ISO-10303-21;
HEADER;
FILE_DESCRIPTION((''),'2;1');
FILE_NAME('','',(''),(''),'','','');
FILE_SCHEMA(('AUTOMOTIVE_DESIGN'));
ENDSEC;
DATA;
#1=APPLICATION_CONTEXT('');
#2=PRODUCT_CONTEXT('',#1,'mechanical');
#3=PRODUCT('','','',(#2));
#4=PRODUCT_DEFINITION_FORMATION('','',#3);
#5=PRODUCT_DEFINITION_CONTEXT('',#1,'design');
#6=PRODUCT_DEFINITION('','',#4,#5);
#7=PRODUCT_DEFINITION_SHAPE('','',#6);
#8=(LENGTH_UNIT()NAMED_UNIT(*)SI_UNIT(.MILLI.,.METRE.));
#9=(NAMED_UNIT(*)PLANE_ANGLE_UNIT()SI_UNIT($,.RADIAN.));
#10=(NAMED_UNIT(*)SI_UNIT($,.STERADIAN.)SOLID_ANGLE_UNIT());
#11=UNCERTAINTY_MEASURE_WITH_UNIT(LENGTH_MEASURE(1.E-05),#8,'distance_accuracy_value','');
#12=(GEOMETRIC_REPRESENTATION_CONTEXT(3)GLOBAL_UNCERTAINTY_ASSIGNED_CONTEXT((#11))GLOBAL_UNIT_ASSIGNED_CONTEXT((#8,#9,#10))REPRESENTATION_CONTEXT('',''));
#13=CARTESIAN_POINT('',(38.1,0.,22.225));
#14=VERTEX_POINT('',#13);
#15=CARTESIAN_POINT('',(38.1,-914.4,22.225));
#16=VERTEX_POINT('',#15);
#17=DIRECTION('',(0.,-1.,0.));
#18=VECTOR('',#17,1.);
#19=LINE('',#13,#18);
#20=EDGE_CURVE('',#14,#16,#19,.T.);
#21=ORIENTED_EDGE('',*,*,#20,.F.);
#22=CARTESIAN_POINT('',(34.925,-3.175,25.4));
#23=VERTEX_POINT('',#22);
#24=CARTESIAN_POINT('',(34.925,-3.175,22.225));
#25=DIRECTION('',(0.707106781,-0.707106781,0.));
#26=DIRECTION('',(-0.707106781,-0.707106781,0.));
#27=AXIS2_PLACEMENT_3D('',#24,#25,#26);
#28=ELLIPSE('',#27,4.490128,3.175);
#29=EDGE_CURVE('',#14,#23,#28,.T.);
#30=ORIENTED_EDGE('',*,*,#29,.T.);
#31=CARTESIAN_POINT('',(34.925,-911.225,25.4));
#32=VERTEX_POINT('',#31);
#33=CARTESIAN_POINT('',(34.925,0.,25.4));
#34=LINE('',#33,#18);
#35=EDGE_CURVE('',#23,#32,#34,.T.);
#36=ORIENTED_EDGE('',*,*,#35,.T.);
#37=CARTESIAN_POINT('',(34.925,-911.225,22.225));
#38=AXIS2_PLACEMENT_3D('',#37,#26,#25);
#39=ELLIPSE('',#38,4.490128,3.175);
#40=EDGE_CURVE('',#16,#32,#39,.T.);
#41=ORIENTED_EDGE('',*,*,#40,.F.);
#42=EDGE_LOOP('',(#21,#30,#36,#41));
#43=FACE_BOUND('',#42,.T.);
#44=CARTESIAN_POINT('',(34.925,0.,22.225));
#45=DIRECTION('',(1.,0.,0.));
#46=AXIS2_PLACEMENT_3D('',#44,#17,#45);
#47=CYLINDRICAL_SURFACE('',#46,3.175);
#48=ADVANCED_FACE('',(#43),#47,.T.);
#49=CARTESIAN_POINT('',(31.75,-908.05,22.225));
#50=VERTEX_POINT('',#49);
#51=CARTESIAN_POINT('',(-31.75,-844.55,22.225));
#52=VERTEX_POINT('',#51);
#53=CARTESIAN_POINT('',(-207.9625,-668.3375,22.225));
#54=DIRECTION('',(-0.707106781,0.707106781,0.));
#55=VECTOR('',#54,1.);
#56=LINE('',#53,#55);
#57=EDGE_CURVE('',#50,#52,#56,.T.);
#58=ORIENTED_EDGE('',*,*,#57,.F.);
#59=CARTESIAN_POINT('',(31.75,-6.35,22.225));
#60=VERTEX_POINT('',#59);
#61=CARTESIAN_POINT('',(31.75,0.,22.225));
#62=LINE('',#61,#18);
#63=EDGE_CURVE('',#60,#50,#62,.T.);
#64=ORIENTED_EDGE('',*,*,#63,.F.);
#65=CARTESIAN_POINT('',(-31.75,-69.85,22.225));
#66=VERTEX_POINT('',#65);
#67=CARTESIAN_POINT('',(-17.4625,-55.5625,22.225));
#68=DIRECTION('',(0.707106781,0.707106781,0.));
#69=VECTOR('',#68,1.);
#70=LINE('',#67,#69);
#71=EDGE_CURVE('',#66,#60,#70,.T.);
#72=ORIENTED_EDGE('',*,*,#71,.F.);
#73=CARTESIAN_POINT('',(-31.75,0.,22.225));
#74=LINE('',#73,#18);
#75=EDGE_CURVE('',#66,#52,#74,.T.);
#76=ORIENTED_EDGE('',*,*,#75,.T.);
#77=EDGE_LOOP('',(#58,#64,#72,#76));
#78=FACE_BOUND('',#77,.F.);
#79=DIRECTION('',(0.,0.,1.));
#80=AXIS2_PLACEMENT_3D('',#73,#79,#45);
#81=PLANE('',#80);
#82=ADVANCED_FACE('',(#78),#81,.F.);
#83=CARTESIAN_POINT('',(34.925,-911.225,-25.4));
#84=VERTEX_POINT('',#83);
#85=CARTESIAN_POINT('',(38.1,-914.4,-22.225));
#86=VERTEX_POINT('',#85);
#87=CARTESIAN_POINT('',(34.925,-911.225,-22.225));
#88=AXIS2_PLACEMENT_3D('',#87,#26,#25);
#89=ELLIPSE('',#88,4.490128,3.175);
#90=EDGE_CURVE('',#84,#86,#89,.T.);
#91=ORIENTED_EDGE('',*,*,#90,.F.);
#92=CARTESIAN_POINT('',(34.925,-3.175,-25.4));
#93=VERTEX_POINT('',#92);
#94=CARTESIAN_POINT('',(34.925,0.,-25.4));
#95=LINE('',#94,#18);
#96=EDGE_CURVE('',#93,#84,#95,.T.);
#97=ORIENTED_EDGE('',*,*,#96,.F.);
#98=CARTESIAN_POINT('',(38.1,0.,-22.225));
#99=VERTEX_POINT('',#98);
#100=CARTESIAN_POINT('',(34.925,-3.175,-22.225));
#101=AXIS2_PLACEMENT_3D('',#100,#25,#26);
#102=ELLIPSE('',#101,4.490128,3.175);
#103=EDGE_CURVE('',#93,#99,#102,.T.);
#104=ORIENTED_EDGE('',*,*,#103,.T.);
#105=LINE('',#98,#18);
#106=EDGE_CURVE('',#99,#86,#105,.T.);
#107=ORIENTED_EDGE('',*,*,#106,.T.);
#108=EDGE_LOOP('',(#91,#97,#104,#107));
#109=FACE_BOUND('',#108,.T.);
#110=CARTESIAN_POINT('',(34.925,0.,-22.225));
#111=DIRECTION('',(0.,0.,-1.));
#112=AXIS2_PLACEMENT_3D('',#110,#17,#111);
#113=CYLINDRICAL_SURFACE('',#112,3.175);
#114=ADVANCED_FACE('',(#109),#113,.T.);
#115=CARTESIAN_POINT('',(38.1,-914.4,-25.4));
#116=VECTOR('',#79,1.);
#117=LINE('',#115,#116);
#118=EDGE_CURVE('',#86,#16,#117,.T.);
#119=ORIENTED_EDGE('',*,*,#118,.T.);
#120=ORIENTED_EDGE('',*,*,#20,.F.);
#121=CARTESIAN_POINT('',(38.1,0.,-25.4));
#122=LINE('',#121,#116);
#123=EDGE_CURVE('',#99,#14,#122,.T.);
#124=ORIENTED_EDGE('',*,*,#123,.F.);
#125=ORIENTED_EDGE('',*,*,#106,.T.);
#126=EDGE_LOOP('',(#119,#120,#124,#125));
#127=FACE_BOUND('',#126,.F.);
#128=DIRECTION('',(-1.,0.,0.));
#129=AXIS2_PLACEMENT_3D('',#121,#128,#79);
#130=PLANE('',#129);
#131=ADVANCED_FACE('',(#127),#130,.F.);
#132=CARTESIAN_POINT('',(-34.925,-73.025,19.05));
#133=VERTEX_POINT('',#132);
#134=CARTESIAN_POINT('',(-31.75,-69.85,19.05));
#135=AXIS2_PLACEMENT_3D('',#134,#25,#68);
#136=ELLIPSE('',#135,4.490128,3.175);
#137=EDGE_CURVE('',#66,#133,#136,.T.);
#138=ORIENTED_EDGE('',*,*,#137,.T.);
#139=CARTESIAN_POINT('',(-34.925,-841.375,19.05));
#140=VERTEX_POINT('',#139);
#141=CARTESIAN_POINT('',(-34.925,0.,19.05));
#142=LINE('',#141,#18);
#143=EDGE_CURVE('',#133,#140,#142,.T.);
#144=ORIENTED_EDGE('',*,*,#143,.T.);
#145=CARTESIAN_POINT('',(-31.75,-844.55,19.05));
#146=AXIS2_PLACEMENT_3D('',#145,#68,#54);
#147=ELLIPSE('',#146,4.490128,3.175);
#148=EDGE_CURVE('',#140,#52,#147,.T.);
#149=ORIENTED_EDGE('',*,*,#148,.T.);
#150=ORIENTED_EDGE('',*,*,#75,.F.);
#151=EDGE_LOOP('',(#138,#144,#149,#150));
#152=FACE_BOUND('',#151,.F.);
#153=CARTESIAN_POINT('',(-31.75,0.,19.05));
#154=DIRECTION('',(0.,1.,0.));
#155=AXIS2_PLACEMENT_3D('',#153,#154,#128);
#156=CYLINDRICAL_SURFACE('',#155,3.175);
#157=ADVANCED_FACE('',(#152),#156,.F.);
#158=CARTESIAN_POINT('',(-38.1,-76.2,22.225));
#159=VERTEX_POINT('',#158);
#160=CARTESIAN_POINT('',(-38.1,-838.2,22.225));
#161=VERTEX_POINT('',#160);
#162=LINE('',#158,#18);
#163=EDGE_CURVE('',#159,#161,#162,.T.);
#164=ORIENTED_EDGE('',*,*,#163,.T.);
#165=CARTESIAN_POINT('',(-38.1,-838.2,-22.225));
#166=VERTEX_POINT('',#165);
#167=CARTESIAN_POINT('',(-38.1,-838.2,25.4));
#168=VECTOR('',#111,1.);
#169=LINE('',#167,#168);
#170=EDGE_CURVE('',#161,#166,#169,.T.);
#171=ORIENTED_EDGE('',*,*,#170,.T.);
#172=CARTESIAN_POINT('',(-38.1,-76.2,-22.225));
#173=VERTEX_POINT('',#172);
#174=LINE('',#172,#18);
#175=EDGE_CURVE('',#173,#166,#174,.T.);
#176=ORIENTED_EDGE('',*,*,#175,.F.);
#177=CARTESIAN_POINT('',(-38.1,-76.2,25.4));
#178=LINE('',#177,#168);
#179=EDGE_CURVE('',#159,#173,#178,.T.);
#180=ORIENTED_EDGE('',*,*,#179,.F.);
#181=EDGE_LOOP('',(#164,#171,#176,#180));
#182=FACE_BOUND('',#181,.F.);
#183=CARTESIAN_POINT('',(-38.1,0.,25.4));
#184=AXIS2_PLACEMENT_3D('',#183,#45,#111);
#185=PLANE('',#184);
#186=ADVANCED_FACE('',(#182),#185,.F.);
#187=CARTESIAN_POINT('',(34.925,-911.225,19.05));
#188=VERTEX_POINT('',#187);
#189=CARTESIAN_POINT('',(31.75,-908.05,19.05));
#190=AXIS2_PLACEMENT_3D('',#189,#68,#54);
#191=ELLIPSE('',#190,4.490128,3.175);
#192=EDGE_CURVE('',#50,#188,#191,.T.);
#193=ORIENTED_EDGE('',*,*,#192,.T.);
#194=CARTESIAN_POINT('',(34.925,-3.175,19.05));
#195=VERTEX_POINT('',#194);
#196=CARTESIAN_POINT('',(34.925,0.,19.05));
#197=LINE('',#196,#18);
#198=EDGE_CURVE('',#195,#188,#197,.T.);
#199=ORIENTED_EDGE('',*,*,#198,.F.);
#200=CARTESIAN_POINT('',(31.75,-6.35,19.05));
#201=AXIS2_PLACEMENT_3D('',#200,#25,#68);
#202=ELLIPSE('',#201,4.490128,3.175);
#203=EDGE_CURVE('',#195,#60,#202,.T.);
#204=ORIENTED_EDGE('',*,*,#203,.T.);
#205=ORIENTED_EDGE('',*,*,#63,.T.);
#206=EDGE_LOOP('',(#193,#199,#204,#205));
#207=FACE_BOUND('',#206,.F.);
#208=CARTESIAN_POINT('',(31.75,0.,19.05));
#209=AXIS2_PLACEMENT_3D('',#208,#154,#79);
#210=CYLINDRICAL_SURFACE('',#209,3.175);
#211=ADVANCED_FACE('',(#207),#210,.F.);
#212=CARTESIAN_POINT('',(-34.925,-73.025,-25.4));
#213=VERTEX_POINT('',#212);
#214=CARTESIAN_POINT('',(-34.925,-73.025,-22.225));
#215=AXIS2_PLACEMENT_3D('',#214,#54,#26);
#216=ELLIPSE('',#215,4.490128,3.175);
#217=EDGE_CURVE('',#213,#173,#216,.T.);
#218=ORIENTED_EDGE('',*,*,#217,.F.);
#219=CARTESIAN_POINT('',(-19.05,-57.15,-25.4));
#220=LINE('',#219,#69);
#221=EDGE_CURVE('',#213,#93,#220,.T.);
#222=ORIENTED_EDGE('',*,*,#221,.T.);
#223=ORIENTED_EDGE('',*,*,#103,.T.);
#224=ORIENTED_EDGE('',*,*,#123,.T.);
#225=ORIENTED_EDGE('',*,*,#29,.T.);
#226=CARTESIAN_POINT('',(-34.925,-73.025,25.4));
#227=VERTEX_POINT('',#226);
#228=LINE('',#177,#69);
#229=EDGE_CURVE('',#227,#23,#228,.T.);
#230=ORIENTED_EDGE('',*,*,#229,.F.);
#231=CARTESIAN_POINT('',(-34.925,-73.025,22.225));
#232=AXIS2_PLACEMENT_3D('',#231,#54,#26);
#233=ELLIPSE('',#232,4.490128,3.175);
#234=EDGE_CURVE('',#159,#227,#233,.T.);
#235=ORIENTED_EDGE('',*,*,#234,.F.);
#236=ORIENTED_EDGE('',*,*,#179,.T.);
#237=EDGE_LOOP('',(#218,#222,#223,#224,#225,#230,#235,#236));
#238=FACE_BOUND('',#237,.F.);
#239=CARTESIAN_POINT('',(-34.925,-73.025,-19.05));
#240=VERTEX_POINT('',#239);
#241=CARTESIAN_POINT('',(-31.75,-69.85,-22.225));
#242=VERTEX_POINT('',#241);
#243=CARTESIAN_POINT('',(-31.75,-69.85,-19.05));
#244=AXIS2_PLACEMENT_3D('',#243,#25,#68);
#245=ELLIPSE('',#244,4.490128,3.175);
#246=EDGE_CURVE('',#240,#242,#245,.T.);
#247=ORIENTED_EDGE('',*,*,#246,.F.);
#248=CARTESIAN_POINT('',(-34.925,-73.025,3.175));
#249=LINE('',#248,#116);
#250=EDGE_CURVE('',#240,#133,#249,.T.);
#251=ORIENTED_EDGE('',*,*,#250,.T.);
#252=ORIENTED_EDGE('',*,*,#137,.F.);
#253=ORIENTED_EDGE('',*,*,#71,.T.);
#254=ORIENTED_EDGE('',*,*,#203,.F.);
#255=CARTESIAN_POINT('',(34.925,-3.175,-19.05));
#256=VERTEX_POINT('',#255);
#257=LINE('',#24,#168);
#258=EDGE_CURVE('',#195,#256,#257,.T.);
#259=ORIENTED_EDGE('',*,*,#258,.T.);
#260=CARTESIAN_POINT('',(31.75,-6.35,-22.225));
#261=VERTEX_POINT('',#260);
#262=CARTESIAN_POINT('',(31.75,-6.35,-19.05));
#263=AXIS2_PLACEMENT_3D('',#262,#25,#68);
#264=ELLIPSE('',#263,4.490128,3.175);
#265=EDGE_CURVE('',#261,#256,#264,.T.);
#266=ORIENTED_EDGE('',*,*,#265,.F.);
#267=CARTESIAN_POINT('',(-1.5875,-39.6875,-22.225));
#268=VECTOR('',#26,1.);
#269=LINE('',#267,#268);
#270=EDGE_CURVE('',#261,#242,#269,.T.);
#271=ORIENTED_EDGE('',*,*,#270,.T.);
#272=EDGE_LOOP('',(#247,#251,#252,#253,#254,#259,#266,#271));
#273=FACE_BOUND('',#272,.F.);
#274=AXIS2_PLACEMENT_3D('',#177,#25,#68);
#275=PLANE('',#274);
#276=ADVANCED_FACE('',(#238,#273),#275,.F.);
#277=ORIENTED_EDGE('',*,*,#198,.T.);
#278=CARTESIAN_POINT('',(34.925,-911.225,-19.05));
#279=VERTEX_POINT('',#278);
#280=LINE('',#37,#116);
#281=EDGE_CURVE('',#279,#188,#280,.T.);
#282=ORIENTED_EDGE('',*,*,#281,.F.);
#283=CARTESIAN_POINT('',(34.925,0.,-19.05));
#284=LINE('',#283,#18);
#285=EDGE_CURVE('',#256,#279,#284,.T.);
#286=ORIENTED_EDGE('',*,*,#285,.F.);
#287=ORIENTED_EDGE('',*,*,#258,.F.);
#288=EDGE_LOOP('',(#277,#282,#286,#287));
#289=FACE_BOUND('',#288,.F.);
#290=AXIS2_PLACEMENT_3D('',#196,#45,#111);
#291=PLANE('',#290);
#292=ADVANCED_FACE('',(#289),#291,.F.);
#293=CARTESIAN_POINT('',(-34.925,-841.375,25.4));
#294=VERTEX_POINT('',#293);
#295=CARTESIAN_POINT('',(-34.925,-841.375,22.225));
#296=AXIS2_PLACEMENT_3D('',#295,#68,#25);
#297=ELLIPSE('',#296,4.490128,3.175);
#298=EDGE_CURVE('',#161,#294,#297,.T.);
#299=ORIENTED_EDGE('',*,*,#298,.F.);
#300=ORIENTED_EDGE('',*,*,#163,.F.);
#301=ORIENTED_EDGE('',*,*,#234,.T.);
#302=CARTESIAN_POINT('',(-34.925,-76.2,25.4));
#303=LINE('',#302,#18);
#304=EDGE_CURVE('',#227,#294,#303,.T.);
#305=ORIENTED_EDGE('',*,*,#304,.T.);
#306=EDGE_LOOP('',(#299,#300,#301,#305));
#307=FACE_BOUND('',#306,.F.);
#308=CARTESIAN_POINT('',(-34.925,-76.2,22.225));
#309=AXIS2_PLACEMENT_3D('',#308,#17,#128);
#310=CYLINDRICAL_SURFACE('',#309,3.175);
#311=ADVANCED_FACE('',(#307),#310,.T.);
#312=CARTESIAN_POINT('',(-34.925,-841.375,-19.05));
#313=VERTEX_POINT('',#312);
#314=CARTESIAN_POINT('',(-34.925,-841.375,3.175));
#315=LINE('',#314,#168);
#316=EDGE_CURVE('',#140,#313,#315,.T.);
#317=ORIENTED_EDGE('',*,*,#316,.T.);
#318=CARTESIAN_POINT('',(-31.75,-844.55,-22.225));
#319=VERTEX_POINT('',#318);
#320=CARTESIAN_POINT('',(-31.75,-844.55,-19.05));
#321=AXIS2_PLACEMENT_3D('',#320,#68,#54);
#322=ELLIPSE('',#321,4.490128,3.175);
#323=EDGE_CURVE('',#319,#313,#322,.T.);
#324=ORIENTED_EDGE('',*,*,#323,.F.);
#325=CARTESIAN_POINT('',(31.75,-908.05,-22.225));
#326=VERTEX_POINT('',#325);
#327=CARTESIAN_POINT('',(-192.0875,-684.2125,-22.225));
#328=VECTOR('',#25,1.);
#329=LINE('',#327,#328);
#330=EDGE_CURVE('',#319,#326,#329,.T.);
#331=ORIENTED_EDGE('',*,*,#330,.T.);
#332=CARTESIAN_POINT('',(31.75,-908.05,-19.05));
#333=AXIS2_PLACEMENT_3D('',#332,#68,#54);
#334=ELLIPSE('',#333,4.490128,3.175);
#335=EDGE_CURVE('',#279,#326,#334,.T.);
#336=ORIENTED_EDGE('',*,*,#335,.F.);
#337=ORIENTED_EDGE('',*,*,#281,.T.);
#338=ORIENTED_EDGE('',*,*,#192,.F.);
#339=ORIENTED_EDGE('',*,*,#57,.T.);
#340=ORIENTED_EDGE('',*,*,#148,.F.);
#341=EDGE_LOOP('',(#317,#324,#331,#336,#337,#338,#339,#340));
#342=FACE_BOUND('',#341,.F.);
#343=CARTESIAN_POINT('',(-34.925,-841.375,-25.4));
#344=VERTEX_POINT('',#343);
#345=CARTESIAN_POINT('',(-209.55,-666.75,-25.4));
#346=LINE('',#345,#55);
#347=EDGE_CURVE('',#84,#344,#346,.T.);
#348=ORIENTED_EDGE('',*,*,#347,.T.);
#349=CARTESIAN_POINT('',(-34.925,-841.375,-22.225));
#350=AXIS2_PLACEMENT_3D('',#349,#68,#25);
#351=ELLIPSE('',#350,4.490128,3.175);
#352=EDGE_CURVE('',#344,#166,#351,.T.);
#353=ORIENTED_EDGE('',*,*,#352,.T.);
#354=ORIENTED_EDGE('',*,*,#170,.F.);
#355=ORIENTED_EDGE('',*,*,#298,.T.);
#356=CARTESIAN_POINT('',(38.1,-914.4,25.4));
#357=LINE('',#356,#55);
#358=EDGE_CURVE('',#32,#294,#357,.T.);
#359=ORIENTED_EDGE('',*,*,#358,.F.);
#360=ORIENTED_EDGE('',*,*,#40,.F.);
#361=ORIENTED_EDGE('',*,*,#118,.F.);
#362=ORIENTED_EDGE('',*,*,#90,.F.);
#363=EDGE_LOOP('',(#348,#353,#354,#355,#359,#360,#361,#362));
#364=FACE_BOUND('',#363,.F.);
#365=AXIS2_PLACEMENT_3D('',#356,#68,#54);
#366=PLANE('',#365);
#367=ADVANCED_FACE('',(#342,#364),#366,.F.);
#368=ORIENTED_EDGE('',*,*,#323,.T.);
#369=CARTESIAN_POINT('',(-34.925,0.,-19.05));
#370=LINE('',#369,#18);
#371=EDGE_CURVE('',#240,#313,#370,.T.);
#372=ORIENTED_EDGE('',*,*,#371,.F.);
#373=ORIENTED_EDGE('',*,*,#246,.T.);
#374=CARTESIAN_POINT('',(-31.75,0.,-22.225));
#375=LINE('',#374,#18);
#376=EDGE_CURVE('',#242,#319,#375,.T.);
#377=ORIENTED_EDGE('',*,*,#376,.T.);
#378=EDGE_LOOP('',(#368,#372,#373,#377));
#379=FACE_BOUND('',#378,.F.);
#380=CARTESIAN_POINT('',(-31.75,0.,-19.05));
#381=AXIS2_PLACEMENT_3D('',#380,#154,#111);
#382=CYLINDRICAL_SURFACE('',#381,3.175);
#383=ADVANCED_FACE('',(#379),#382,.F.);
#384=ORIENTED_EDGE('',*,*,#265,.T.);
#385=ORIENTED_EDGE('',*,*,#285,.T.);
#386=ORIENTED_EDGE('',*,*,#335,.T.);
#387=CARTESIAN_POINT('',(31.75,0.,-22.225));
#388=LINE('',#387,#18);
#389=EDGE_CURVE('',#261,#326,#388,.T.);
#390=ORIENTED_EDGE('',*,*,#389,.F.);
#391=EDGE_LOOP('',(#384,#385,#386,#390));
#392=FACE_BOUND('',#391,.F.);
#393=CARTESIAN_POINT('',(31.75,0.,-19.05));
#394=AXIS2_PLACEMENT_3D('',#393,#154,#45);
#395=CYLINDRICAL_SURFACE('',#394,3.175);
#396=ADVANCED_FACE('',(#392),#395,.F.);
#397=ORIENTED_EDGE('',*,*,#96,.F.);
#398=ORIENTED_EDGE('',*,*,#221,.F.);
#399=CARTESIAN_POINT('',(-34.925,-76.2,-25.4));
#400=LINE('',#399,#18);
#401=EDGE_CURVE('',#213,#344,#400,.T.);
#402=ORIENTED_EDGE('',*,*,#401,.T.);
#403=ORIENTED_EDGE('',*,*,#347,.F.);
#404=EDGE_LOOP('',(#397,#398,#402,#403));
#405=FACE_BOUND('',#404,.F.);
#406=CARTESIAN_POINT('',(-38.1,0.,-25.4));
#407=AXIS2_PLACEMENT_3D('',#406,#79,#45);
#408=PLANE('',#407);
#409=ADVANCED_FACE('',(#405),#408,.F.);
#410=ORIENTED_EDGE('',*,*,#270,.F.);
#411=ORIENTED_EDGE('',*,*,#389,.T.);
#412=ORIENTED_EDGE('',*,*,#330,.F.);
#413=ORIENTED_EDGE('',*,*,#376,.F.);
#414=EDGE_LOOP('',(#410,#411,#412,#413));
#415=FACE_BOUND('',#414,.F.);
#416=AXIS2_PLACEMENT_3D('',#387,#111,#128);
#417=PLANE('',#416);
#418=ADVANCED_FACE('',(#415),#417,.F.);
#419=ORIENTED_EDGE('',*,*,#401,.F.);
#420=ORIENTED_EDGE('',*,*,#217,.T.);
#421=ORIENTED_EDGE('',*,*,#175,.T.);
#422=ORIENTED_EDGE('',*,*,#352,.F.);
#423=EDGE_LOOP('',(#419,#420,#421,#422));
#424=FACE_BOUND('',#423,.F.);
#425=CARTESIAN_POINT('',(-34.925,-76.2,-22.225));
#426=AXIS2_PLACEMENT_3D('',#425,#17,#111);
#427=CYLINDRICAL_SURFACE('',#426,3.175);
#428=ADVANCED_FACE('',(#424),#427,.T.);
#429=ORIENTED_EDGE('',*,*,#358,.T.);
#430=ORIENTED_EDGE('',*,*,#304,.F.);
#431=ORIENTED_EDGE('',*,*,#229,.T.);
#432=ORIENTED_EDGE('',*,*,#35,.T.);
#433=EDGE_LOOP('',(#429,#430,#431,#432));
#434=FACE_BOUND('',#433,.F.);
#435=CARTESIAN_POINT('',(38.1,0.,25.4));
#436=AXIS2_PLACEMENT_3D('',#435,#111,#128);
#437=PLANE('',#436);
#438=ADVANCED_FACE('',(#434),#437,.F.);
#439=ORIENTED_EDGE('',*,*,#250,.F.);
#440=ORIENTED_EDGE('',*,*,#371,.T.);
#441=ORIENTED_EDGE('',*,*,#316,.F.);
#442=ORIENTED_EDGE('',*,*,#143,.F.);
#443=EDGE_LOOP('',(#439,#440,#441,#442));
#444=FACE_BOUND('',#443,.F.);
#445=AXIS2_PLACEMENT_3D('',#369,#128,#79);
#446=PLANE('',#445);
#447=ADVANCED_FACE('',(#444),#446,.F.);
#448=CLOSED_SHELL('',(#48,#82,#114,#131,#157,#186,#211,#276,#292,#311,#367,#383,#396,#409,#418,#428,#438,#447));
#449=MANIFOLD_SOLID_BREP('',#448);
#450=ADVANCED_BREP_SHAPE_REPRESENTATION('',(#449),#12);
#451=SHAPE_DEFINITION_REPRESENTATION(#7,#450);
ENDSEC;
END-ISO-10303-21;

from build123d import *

# Parameters (mm, degrees)
F2_DEPTH = 914.4
F4_DEPTH = 50.801
F6_DEPTH = 50.801
F7_R     = 3.175


# Not quite as in the source:
# - a variable given as a bare number and used for a length is read in inches; the dataset says mm whatever the document's units were


with BuildPart() as f2:
    # F0 (on Front) → F2 (new body)
    with BuildSketch(Plane.XZ):
        Polygon((-38.1, 22.225), (-38.1, -22.225), (-38.1, -25.4), (-34.925, -25.4), (34.925, -25.4), (38.1, -25.4), (38.1, -22.225), (38.1, 22.225), (38.1, 25.4), (34.925, 25.4), (-34.925, 25.4), (-38.1, 25.4), align=None)
        with BuildLine():
            ThreePointArc((31.75, 22.225), (33.9950640303, 21.2950640303), (34.925, 19.05))
            Line((34.925, 19.05), (34.925, -19.05))
            ThreePointArc((34.925, -19.05), (33.9950640303, -21.2950640303), (31.75, -22.225))
            Line((31.75, -22.225), (-31.75, -22.225))
            ThreePointArc((-31.75, -22.225), (-33.9950640303, -21.2950640303), (-34.925, -19.05))
            Line((-34.925, -19.05), (-34.925, 19.05))
            ThreePointArc((-34.925, 19.05), (-33.9950640303, 21.2950640303), (-31.75, 22.225))
            Line((-31.75, 22.225), (31.75, 22.225))
        make_face(mode=Mode.SUBTRACT)
    extrude(amount=F2_DEPTH)

    # F3 (on face) → F4 (cut, through all)
    with BuildSketch(Plane.XY.offset(25.4)):
        Polygon((38.1, 0), (-38.1, 0), (-38.1, -76.2), align=None)
    extrude(amount=-F4_DEPTH, mode=Mode.SUBTRACT)

    # F5 (on face) → F6 (cut, through all)
    with BuildSketch(Plane.XY.offset(25.4)):
        Polygon((-38.1, -914.4), (38.1, -914.4), (-38.1, -838.2), align=None)
    extrude(amount=-F6_DEPTH, mode=Mode.SUBTRACT)

    # F7
    f7_edges = [f2.edges().sort_by_distance(p)[0] for p in [
        (-38.1, -457.2, 25.4),
        (-38.1, -457.2, -25.4),
        (38.1, -457.2, 25.4),
        (38.1, -457.2, -25.4),
    ]]
    fillet(f7_edges, radius=F7_R)


solid = f2.part
